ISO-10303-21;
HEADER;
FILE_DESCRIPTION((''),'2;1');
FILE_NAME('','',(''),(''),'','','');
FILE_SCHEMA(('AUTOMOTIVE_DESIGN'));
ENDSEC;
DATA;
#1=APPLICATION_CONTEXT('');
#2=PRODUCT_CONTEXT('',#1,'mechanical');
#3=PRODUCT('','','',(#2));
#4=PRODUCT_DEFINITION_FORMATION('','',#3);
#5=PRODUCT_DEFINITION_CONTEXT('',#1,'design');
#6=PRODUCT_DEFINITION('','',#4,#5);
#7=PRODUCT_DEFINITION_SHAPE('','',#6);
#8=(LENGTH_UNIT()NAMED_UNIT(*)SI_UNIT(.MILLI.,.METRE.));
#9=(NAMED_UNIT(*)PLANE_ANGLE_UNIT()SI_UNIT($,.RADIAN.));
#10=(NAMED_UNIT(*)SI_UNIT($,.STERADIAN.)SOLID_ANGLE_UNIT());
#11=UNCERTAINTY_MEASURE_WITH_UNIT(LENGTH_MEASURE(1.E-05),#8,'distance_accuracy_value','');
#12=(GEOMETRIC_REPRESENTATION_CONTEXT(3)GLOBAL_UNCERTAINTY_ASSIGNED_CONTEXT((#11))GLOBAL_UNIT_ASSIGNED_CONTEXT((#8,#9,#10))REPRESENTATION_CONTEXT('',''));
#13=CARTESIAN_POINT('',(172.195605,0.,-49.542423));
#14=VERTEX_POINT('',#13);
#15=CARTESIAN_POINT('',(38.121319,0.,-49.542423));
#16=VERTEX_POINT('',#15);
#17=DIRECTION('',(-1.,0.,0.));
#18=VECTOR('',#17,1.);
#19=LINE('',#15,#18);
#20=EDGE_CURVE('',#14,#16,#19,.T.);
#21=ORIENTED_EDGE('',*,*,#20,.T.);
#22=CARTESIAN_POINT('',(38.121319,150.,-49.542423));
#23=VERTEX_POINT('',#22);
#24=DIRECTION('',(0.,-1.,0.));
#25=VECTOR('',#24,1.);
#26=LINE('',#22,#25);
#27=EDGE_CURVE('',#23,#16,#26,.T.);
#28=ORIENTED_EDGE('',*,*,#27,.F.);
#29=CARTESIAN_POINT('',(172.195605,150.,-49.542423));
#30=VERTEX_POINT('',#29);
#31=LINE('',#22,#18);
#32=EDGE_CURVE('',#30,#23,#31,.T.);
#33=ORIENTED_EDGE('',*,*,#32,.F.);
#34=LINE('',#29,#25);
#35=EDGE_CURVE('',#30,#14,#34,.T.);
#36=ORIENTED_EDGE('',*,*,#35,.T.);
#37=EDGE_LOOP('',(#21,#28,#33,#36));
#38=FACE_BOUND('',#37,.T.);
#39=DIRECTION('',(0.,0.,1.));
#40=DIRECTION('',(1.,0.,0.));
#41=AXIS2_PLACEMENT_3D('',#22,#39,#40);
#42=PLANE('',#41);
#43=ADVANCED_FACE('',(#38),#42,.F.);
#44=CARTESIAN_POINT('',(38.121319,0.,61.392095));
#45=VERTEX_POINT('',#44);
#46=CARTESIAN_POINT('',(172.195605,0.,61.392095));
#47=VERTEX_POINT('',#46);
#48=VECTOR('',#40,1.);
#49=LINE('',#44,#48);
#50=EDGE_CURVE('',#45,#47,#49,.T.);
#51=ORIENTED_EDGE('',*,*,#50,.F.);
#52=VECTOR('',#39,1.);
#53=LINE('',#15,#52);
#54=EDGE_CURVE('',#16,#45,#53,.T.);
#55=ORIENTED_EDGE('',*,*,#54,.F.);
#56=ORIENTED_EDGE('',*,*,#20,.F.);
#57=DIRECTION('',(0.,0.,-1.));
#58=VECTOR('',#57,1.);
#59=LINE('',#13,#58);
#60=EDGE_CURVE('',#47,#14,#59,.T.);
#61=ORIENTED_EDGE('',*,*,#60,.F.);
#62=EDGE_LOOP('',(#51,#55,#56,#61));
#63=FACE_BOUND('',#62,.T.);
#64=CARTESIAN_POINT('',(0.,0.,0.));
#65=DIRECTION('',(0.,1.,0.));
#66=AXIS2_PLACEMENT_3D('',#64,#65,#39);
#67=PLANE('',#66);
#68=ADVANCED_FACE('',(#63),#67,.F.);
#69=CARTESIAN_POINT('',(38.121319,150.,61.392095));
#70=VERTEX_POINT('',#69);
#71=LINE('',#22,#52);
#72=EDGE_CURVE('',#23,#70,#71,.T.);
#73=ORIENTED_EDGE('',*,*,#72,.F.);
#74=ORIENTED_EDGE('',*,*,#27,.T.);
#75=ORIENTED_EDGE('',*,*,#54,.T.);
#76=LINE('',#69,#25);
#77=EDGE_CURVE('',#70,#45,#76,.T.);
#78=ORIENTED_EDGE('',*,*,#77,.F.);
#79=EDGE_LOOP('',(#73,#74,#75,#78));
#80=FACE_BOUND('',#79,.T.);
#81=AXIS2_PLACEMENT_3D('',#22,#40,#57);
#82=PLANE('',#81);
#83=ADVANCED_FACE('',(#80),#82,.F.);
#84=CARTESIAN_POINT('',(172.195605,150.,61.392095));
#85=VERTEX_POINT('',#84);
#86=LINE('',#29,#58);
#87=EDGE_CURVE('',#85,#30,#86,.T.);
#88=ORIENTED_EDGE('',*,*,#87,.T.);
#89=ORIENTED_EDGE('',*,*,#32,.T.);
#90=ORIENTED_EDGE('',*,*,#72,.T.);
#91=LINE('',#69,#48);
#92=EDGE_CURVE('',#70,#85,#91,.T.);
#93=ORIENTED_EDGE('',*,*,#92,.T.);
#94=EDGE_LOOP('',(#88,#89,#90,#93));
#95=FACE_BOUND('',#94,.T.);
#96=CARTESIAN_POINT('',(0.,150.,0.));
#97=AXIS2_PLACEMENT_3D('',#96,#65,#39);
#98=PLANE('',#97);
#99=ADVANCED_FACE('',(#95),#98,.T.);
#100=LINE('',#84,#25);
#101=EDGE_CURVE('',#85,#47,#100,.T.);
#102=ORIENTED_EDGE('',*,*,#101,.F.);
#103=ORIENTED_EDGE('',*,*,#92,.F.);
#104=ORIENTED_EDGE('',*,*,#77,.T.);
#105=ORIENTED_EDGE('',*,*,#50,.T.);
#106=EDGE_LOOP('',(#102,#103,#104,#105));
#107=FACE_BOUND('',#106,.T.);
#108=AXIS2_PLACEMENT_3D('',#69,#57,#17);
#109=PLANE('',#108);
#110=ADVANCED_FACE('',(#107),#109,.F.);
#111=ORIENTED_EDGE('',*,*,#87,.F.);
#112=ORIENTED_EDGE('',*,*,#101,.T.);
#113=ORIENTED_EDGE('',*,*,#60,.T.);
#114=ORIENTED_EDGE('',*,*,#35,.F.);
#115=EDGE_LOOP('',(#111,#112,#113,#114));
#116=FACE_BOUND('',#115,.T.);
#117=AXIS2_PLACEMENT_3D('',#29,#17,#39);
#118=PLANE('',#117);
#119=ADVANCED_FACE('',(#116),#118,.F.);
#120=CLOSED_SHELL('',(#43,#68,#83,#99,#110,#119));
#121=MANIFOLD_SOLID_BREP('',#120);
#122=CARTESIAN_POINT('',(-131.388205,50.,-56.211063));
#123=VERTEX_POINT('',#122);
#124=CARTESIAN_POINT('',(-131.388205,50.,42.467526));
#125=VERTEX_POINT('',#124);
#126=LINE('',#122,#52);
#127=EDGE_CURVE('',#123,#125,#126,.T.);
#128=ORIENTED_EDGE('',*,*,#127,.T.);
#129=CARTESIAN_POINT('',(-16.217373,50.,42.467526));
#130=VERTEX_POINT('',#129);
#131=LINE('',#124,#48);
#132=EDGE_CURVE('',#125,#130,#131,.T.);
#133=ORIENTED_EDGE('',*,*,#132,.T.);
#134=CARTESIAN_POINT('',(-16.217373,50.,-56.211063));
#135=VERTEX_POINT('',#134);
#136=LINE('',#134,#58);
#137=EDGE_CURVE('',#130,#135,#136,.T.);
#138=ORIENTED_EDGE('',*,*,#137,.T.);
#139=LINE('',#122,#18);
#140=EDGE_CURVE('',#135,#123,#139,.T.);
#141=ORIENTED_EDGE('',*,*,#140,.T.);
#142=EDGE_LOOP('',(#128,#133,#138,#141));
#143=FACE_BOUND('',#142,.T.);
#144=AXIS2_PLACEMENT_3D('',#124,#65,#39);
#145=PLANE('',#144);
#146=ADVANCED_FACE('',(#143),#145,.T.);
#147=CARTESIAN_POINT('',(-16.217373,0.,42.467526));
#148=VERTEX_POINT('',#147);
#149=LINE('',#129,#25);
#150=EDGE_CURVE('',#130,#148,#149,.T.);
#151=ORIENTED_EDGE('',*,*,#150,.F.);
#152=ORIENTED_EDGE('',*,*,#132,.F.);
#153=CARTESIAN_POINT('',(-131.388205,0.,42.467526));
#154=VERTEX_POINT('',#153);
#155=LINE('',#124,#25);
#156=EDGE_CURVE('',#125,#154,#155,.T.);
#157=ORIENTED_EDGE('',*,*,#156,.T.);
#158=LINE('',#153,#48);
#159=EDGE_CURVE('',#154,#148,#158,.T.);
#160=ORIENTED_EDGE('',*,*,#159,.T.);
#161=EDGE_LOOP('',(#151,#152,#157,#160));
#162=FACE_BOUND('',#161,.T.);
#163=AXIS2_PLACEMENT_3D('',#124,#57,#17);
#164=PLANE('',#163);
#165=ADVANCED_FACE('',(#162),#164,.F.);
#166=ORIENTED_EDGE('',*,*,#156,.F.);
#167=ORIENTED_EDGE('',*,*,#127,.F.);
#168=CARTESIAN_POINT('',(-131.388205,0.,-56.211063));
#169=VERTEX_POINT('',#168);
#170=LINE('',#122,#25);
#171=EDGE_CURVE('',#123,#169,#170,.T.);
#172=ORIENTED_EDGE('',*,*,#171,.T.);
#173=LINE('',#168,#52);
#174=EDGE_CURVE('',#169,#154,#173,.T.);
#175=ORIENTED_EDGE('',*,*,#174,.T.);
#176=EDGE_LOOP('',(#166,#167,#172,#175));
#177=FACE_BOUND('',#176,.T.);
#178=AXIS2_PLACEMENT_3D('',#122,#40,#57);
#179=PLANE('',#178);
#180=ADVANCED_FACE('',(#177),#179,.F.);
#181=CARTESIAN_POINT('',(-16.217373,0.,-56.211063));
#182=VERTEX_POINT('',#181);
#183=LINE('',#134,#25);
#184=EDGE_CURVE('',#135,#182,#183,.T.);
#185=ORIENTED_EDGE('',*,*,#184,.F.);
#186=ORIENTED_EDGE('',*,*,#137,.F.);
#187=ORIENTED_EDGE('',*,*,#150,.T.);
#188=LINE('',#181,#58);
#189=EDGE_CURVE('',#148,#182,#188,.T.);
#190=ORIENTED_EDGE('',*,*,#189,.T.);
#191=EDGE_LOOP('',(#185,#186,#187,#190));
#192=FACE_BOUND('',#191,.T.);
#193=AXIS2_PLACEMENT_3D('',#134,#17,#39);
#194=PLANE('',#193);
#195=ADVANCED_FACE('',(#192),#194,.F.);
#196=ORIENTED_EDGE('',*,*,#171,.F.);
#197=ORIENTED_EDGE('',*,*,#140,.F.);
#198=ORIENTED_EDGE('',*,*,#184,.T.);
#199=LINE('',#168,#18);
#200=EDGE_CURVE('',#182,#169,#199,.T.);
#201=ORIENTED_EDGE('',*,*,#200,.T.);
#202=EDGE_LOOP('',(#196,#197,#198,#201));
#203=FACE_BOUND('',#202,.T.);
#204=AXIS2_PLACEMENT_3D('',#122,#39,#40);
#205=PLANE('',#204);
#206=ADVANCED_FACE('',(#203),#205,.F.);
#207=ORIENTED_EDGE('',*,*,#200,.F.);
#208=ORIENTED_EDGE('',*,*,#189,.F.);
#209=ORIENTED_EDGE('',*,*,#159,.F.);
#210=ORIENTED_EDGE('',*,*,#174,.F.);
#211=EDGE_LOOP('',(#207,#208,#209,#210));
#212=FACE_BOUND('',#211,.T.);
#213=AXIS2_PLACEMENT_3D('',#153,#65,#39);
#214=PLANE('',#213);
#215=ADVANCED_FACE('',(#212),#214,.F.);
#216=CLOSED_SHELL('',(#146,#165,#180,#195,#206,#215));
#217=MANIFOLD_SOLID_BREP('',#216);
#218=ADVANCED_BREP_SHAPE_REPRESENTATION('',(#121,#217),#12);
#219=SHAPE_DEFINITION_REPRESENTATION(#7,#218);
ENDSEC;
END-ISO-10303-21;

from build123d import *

# Parameters (mm, degrees)
BOSS_EXTRUDE1_OUTLINE_W = 115.170832384
BOSS_EXTRUDE1_OUTLINE_H = 98.678589084
BOSS_EXTRUDE1_DEPTH     = 50
SKETCH2_W               = 134.074286241
SKETCH2_H               = 110.934517328
BOSS_EXTRUDE2_DEPTH     = 150


# Read off the part's stored shape, not the designer's step: Boss-Extrude1
with BuildPart() as part:
    # Boss-Extrude1 outline → Boss-Extrude1 (new body)
    with BuildSketch(Plane(origin=(0, 0, 0), x_dir=(1, 0, 0), z_dir=(0, 1, 0))):
        with Locations((-73.802788771, 6.871768042)):
            Rectangle(BOSS_EXTRUDE1_OUTLINE_W, BOSS_EXTRUDE1_OUTLINE_H)
    extrude(amount=BOSS_EXTRUDE1_DEPTH)


with BuildPart() as body_2:
    # Sketch2 → Boss-Extrude2 (new body)
    with BuildSketch(Plane(origin=(0, 0, 0), x_dir=(1, 0, 0), z_dir=(0, 1, 0))):
        with Locations((105.158462238, -5.924836033)):
            Rectangle(SKETCH2_W, SKETCH2_H)
    extrude(amount=BOSS_EXTRUDE2_DEPTH)


solid = Compound([part.part, body_2.part])
